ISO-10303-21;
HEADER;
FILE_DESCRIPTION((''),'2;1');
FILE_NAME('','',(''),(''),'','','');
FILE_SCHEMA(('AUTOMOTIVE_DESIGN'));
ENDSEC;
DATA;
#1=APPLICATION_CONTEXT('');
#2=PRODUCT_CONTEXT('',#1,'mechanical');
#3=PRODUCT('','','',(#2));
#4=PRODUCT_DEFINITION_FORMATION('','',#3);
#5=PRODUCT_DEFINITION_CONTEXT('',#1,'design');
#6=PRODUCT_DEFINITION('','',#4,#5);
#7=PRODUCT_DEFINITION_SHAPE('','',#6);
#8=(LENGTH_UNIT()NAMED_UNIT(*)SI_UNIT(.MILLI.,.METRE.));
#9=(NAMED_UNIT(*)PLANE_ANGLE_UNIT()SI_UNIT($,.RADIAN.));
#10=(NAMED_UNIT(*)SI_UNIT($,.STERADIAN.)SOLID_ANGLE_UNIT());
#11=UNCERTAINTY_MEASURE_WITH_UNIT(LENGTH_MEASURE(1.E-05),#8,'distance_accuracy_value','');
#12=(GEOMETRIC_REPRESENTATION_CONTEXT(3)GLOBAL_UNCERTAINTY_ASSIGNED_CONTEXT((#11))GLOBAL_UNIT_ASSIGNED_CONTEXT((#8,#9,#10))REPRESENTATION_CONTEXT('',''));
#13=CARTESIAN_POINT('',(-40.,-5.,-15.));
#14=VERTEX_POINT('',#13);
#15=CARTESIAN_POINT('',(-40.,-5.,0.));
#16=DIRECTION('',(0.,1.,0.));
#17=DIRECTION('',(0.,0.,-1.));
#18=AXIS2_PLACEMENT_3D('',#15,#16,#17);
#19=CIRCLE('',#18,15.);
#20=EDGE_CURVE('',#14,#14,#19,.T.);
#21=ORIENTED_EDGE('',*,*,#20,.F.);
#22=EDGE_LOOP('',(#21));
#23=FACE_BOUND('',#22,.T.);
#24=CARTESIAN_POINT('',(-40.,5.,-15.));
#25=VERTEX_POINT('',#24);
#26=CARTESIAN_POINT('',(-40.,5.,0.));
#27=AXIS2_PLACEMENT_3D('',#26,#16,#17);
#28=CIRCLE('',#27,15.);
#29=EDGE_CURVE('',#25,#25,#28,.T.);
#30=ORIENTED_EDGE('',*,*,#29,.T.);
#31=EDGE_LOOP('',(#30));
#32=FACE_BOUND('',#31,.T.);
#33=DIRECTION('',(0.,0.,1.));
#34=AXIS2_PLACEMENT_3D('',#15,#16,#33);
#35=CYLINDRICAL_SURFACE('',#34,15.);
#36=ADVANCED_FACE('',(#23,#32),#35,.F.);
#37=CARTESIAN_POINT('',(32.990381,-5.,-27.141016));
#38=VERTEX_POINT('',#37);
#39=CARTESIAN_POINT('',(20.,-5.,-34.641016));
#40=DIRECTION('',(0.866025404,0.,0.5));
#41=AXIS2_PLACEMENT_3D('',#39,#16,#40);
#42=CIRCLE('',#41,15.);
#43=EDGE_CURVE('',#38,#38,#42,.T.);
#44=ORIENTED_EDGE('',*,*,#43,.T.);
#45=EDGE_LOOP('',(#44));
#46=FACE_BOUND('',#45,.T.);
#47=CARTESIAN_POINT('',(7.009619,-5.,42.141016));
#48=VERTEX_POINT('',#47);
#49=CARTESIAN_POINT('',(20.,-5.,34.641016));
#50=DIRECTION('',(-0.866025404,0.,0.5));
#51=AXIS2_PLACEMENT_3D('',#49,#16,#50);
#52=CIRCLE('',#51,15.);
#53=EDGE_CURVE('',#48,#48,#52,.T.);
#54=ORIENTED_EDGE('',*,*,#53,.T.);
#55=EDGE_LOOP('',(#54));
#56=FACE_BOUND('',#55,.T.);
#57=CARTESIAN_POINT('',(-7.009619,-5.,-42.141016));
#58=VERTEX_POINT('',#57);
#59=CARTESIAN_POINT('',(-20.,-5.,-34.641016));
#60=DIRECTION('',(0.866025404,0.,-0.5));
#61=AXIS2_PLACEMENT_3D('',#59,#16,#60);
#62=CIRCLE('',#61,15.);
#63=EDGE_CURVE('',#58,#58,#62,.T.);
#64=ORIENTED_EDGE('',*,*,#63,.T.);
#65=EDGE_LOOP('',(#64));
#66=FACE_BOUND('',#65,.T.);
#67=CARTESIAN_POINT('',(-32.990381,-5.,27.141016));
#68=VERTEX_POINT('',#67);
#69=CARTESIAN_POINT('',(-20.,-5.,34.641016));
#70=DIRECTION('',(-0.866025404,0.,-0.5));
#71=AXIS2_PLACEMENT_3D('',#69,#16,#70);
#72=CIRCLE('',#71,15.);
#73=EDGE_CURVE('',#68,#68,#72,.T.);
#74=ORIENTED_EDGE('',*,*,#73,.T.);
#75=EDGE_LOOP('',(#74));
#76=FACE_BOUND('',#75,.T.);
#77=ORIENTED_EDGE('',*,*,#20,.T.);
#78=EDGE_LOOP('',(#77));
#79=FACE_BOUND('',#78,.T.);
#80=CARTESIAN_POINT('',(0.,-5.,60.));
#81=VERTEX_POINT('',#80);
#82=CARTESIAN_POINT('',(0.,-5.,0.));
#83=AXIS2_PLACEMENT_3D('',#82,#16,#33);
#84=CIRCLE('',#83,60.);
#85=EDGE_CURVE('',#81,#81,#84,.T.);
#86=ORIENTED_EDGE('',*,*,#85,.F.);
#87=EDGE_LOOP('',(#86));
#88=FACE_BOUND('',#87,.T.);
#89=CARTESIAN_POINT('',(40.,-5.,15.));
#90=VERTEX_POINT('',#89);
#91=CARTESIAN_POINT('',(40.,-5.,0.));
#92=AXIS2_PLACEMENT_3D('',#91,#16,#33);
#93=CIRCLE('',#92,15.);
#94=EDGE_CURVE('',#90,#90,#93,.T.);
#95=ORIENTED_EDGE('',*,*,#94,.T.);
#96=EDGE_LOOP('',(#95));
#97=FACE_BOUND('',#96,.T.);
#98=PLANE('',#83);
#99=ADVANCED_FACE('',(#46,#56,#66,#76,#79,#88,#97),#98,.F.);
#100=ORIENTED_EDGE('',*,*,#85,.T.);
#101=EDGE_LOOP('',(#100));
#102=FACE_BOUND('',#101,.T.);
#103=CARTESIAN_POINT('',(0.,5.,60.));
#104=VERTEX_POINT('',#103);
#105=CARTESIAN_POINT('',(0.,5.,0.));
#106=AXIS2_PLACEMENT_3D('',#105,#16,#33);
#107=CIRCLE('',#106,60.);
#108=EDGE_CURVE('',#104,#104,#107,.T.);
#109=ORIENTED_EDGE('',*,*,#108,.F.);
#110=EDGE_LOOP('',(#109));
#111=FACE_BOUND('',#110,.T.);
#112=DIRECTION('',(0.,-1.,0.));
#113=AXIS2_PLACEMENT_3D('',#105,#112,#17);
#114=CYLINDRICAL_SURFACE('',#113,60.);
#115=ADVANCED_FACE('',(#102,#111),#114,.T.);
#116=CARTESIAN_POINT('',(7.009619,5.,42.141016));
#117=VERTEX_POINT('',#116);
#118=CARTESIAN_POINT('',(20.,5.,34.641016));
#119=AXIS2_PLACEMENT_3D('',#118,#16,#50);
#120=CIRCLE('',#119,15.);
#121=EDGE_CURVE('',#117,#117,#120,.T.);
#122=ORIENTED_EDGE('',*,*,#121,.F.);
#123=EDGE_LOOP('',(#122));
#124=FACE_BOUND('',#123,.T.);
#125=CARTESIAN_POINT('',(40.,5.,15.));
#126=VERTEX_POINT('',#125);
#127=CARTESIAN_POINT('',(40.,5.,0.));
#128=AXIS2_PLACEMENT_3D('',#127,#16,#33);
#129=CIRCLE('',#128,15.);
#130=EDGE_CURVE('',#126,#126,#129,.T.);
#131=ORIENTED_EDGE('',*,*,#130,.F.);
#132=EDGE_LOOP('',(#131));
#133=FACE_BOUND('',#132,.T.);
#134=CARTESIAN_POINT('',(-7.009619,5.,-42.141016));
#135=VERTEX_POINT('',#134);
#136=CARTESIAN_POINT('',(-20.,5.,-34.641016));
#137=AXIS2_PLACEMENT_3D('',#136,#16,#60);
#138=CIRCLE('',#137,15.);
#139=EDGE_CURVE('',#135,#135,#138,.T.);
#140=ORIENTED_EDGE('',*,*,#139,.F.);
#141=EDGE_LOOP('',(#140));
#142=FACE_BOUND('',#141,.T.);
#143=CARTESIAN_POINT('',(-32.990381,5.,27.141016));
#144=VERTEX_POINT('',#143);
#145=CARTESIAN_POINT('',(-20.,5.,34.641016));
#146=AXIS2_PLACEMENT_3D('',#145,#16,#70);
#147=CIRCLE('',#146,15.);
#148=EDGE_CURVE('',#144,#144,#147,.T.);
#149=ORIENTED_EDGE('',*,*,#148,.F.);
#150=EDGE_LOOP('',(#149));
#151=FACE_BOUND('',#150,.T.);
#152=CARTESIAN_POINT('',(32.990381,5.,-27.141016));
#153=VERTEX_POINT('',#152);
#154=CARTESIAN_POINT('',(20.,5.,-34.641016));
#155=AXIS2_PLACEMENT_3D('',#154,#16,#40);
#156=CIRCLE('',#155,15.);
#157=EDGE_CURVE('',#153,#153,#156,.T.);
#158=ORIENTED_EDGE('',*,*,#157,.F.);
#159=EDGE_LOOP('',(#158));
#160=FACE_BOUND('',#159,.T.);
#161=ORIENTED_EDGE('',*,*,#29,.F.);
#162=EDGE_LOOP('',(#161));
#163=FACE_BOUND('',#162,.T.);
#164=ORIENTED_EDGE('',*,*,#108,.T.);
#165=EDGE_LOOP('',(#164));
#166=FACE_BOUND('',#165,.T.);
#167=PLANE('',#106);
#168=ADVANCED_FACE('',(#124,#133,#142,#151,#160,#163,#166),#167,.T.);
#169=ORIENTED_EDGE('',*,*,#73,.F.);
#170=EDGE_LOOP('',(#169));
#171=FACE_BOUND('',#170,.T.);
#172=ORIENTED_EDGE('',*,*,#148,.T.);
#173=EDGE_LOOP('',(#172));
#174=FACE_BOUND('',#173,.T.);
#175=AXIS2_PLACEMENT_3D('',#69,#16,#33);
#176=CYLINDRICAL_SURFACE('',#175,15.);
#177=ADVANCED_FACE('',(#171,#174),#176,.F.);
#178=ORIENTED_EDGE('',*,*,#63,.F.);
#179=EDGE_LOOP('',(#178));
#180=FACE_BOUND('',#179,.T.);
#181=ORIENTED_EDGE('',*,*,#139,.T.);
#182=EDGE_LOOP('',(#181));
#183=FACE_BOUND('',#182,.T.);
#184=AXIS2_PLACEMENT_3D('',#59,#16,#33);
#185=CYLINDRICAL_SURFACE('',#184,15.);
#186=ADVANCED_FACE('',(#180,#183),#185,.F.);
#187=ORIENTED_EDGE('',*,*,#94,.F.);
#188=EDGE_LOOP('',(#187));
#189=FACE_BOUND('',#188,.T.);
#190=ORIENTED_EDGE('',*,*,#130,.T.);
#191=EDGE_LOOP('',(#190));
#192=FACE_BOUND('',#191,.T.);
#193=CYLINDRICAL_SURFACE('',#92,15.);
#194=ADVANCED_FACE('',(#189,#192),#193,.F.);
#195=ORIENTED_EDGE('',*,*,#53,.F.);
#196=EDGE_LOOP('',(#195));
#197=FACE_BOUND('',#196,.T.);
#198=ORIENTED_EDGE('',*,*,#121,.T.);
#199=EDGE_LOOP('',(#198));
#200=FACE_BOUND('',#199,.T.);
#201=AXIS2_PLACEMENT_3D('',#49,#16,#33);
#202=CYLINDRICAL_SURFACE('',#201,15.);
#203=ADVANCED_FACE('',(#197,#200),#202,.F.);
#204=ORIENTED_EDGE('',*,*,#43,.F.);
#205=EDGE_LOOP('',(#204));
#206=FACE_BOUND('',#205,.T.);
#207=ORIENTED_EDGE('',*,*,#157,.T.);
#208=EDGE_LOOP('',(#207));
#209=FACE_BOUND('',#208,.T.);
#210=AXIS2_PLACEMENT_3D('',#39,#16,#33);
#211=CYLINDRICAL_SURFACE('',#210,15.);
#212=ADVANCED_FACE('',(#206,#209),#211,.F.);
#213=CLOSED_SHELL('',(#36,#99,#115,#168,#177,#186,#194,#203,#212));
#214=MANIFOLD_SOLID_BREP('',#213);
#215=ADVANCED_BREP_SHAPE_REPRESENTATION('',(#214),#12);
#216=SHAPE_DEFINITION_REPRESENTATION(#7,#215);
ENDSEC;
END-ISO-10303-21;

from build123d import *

# Parameters (mm, degrees)
ESQUISSE1_R                      = 60
BOSS_EXTRU_1_DEPTH               = 5
ESQUISSE2_R                      = 15
ENL_V_MAT_EXTRU_1_DEPTH          = 86
R_P_TITION_START                 = -5
R_P_TITION_CIRCULAIRE1_OUTLINE_R = 15
R_P_TITION_CIRCULAIRE1_DEPTH     = 10


# Read off the part's stored shape, not the designer's step: Répétition circulaire1
with BuildPart() as part:
    # Esquisse1 → Boss.-Extru.1 (new, symmetric)
    with BuildSketch(Plane(origin=(0, 0, 0), x_dir=(1, 0, 0), z_dir=(0, 1, 0))):
        with Locations(Location((0, 0, 0), (0, 0, 270))):
            Circle(ESQUISSE1_R)
    extrude(amount=BOSS_EXTRU_1_DEPTH, both=True)

    # Esquisse2 → Enlèv. mat.-Extru.1 (cut, symmetric)
    with BuildSketch(Plane(origin=(0, 0, 0), x_dir=(1, 0, 0), z_dir=(0, 1, 0))):
        with Locations(Location((40, 0, 0), (0, 0, 270))):
            Circle(ESQUISSE2_R)
    extrude(amount=ENL_V_MAT_EXTRU_1_DEPTH, both=True, mode=Mode.SUBTRACT)

    # Répétition circulaire1 outline → Répétition circulaire1 (cut)
    with BuildSketch(Plane(origin=(0, 0, 0), x_dir=(1, 0, 0), z_dir=(0, 1, 0)).offset(R_P_TITION_START)):
        with Locations((20, 34.641016151)):
            Circle(R_P_TITION_CIRCULAIRE1_OUTLINE_R)
        with Locations((-20, 34.641016151)):
            Circle(R_P_TITION_CIRCULAIRE1_OUTLINE_R)
        with Locations((-40, 0)):
            Circle(R_P_TITION_CIRCULAIRE1_OUTLINE_R)
        with Locations((-20, -34.641016151)):
            Circle(R_P_TITION_CIRCULAIRE1_OUTLINE_R)
        with Locations((20, -34.641016151)):
            Circle(R_P_TITION_CIRCULAIRE1_OUTLINE_R)
    extrude(amount=R_P_TITION_CIRCULAIRE1_DEPTH, mode=Mode.SUBTRACT)


solid = part.part
